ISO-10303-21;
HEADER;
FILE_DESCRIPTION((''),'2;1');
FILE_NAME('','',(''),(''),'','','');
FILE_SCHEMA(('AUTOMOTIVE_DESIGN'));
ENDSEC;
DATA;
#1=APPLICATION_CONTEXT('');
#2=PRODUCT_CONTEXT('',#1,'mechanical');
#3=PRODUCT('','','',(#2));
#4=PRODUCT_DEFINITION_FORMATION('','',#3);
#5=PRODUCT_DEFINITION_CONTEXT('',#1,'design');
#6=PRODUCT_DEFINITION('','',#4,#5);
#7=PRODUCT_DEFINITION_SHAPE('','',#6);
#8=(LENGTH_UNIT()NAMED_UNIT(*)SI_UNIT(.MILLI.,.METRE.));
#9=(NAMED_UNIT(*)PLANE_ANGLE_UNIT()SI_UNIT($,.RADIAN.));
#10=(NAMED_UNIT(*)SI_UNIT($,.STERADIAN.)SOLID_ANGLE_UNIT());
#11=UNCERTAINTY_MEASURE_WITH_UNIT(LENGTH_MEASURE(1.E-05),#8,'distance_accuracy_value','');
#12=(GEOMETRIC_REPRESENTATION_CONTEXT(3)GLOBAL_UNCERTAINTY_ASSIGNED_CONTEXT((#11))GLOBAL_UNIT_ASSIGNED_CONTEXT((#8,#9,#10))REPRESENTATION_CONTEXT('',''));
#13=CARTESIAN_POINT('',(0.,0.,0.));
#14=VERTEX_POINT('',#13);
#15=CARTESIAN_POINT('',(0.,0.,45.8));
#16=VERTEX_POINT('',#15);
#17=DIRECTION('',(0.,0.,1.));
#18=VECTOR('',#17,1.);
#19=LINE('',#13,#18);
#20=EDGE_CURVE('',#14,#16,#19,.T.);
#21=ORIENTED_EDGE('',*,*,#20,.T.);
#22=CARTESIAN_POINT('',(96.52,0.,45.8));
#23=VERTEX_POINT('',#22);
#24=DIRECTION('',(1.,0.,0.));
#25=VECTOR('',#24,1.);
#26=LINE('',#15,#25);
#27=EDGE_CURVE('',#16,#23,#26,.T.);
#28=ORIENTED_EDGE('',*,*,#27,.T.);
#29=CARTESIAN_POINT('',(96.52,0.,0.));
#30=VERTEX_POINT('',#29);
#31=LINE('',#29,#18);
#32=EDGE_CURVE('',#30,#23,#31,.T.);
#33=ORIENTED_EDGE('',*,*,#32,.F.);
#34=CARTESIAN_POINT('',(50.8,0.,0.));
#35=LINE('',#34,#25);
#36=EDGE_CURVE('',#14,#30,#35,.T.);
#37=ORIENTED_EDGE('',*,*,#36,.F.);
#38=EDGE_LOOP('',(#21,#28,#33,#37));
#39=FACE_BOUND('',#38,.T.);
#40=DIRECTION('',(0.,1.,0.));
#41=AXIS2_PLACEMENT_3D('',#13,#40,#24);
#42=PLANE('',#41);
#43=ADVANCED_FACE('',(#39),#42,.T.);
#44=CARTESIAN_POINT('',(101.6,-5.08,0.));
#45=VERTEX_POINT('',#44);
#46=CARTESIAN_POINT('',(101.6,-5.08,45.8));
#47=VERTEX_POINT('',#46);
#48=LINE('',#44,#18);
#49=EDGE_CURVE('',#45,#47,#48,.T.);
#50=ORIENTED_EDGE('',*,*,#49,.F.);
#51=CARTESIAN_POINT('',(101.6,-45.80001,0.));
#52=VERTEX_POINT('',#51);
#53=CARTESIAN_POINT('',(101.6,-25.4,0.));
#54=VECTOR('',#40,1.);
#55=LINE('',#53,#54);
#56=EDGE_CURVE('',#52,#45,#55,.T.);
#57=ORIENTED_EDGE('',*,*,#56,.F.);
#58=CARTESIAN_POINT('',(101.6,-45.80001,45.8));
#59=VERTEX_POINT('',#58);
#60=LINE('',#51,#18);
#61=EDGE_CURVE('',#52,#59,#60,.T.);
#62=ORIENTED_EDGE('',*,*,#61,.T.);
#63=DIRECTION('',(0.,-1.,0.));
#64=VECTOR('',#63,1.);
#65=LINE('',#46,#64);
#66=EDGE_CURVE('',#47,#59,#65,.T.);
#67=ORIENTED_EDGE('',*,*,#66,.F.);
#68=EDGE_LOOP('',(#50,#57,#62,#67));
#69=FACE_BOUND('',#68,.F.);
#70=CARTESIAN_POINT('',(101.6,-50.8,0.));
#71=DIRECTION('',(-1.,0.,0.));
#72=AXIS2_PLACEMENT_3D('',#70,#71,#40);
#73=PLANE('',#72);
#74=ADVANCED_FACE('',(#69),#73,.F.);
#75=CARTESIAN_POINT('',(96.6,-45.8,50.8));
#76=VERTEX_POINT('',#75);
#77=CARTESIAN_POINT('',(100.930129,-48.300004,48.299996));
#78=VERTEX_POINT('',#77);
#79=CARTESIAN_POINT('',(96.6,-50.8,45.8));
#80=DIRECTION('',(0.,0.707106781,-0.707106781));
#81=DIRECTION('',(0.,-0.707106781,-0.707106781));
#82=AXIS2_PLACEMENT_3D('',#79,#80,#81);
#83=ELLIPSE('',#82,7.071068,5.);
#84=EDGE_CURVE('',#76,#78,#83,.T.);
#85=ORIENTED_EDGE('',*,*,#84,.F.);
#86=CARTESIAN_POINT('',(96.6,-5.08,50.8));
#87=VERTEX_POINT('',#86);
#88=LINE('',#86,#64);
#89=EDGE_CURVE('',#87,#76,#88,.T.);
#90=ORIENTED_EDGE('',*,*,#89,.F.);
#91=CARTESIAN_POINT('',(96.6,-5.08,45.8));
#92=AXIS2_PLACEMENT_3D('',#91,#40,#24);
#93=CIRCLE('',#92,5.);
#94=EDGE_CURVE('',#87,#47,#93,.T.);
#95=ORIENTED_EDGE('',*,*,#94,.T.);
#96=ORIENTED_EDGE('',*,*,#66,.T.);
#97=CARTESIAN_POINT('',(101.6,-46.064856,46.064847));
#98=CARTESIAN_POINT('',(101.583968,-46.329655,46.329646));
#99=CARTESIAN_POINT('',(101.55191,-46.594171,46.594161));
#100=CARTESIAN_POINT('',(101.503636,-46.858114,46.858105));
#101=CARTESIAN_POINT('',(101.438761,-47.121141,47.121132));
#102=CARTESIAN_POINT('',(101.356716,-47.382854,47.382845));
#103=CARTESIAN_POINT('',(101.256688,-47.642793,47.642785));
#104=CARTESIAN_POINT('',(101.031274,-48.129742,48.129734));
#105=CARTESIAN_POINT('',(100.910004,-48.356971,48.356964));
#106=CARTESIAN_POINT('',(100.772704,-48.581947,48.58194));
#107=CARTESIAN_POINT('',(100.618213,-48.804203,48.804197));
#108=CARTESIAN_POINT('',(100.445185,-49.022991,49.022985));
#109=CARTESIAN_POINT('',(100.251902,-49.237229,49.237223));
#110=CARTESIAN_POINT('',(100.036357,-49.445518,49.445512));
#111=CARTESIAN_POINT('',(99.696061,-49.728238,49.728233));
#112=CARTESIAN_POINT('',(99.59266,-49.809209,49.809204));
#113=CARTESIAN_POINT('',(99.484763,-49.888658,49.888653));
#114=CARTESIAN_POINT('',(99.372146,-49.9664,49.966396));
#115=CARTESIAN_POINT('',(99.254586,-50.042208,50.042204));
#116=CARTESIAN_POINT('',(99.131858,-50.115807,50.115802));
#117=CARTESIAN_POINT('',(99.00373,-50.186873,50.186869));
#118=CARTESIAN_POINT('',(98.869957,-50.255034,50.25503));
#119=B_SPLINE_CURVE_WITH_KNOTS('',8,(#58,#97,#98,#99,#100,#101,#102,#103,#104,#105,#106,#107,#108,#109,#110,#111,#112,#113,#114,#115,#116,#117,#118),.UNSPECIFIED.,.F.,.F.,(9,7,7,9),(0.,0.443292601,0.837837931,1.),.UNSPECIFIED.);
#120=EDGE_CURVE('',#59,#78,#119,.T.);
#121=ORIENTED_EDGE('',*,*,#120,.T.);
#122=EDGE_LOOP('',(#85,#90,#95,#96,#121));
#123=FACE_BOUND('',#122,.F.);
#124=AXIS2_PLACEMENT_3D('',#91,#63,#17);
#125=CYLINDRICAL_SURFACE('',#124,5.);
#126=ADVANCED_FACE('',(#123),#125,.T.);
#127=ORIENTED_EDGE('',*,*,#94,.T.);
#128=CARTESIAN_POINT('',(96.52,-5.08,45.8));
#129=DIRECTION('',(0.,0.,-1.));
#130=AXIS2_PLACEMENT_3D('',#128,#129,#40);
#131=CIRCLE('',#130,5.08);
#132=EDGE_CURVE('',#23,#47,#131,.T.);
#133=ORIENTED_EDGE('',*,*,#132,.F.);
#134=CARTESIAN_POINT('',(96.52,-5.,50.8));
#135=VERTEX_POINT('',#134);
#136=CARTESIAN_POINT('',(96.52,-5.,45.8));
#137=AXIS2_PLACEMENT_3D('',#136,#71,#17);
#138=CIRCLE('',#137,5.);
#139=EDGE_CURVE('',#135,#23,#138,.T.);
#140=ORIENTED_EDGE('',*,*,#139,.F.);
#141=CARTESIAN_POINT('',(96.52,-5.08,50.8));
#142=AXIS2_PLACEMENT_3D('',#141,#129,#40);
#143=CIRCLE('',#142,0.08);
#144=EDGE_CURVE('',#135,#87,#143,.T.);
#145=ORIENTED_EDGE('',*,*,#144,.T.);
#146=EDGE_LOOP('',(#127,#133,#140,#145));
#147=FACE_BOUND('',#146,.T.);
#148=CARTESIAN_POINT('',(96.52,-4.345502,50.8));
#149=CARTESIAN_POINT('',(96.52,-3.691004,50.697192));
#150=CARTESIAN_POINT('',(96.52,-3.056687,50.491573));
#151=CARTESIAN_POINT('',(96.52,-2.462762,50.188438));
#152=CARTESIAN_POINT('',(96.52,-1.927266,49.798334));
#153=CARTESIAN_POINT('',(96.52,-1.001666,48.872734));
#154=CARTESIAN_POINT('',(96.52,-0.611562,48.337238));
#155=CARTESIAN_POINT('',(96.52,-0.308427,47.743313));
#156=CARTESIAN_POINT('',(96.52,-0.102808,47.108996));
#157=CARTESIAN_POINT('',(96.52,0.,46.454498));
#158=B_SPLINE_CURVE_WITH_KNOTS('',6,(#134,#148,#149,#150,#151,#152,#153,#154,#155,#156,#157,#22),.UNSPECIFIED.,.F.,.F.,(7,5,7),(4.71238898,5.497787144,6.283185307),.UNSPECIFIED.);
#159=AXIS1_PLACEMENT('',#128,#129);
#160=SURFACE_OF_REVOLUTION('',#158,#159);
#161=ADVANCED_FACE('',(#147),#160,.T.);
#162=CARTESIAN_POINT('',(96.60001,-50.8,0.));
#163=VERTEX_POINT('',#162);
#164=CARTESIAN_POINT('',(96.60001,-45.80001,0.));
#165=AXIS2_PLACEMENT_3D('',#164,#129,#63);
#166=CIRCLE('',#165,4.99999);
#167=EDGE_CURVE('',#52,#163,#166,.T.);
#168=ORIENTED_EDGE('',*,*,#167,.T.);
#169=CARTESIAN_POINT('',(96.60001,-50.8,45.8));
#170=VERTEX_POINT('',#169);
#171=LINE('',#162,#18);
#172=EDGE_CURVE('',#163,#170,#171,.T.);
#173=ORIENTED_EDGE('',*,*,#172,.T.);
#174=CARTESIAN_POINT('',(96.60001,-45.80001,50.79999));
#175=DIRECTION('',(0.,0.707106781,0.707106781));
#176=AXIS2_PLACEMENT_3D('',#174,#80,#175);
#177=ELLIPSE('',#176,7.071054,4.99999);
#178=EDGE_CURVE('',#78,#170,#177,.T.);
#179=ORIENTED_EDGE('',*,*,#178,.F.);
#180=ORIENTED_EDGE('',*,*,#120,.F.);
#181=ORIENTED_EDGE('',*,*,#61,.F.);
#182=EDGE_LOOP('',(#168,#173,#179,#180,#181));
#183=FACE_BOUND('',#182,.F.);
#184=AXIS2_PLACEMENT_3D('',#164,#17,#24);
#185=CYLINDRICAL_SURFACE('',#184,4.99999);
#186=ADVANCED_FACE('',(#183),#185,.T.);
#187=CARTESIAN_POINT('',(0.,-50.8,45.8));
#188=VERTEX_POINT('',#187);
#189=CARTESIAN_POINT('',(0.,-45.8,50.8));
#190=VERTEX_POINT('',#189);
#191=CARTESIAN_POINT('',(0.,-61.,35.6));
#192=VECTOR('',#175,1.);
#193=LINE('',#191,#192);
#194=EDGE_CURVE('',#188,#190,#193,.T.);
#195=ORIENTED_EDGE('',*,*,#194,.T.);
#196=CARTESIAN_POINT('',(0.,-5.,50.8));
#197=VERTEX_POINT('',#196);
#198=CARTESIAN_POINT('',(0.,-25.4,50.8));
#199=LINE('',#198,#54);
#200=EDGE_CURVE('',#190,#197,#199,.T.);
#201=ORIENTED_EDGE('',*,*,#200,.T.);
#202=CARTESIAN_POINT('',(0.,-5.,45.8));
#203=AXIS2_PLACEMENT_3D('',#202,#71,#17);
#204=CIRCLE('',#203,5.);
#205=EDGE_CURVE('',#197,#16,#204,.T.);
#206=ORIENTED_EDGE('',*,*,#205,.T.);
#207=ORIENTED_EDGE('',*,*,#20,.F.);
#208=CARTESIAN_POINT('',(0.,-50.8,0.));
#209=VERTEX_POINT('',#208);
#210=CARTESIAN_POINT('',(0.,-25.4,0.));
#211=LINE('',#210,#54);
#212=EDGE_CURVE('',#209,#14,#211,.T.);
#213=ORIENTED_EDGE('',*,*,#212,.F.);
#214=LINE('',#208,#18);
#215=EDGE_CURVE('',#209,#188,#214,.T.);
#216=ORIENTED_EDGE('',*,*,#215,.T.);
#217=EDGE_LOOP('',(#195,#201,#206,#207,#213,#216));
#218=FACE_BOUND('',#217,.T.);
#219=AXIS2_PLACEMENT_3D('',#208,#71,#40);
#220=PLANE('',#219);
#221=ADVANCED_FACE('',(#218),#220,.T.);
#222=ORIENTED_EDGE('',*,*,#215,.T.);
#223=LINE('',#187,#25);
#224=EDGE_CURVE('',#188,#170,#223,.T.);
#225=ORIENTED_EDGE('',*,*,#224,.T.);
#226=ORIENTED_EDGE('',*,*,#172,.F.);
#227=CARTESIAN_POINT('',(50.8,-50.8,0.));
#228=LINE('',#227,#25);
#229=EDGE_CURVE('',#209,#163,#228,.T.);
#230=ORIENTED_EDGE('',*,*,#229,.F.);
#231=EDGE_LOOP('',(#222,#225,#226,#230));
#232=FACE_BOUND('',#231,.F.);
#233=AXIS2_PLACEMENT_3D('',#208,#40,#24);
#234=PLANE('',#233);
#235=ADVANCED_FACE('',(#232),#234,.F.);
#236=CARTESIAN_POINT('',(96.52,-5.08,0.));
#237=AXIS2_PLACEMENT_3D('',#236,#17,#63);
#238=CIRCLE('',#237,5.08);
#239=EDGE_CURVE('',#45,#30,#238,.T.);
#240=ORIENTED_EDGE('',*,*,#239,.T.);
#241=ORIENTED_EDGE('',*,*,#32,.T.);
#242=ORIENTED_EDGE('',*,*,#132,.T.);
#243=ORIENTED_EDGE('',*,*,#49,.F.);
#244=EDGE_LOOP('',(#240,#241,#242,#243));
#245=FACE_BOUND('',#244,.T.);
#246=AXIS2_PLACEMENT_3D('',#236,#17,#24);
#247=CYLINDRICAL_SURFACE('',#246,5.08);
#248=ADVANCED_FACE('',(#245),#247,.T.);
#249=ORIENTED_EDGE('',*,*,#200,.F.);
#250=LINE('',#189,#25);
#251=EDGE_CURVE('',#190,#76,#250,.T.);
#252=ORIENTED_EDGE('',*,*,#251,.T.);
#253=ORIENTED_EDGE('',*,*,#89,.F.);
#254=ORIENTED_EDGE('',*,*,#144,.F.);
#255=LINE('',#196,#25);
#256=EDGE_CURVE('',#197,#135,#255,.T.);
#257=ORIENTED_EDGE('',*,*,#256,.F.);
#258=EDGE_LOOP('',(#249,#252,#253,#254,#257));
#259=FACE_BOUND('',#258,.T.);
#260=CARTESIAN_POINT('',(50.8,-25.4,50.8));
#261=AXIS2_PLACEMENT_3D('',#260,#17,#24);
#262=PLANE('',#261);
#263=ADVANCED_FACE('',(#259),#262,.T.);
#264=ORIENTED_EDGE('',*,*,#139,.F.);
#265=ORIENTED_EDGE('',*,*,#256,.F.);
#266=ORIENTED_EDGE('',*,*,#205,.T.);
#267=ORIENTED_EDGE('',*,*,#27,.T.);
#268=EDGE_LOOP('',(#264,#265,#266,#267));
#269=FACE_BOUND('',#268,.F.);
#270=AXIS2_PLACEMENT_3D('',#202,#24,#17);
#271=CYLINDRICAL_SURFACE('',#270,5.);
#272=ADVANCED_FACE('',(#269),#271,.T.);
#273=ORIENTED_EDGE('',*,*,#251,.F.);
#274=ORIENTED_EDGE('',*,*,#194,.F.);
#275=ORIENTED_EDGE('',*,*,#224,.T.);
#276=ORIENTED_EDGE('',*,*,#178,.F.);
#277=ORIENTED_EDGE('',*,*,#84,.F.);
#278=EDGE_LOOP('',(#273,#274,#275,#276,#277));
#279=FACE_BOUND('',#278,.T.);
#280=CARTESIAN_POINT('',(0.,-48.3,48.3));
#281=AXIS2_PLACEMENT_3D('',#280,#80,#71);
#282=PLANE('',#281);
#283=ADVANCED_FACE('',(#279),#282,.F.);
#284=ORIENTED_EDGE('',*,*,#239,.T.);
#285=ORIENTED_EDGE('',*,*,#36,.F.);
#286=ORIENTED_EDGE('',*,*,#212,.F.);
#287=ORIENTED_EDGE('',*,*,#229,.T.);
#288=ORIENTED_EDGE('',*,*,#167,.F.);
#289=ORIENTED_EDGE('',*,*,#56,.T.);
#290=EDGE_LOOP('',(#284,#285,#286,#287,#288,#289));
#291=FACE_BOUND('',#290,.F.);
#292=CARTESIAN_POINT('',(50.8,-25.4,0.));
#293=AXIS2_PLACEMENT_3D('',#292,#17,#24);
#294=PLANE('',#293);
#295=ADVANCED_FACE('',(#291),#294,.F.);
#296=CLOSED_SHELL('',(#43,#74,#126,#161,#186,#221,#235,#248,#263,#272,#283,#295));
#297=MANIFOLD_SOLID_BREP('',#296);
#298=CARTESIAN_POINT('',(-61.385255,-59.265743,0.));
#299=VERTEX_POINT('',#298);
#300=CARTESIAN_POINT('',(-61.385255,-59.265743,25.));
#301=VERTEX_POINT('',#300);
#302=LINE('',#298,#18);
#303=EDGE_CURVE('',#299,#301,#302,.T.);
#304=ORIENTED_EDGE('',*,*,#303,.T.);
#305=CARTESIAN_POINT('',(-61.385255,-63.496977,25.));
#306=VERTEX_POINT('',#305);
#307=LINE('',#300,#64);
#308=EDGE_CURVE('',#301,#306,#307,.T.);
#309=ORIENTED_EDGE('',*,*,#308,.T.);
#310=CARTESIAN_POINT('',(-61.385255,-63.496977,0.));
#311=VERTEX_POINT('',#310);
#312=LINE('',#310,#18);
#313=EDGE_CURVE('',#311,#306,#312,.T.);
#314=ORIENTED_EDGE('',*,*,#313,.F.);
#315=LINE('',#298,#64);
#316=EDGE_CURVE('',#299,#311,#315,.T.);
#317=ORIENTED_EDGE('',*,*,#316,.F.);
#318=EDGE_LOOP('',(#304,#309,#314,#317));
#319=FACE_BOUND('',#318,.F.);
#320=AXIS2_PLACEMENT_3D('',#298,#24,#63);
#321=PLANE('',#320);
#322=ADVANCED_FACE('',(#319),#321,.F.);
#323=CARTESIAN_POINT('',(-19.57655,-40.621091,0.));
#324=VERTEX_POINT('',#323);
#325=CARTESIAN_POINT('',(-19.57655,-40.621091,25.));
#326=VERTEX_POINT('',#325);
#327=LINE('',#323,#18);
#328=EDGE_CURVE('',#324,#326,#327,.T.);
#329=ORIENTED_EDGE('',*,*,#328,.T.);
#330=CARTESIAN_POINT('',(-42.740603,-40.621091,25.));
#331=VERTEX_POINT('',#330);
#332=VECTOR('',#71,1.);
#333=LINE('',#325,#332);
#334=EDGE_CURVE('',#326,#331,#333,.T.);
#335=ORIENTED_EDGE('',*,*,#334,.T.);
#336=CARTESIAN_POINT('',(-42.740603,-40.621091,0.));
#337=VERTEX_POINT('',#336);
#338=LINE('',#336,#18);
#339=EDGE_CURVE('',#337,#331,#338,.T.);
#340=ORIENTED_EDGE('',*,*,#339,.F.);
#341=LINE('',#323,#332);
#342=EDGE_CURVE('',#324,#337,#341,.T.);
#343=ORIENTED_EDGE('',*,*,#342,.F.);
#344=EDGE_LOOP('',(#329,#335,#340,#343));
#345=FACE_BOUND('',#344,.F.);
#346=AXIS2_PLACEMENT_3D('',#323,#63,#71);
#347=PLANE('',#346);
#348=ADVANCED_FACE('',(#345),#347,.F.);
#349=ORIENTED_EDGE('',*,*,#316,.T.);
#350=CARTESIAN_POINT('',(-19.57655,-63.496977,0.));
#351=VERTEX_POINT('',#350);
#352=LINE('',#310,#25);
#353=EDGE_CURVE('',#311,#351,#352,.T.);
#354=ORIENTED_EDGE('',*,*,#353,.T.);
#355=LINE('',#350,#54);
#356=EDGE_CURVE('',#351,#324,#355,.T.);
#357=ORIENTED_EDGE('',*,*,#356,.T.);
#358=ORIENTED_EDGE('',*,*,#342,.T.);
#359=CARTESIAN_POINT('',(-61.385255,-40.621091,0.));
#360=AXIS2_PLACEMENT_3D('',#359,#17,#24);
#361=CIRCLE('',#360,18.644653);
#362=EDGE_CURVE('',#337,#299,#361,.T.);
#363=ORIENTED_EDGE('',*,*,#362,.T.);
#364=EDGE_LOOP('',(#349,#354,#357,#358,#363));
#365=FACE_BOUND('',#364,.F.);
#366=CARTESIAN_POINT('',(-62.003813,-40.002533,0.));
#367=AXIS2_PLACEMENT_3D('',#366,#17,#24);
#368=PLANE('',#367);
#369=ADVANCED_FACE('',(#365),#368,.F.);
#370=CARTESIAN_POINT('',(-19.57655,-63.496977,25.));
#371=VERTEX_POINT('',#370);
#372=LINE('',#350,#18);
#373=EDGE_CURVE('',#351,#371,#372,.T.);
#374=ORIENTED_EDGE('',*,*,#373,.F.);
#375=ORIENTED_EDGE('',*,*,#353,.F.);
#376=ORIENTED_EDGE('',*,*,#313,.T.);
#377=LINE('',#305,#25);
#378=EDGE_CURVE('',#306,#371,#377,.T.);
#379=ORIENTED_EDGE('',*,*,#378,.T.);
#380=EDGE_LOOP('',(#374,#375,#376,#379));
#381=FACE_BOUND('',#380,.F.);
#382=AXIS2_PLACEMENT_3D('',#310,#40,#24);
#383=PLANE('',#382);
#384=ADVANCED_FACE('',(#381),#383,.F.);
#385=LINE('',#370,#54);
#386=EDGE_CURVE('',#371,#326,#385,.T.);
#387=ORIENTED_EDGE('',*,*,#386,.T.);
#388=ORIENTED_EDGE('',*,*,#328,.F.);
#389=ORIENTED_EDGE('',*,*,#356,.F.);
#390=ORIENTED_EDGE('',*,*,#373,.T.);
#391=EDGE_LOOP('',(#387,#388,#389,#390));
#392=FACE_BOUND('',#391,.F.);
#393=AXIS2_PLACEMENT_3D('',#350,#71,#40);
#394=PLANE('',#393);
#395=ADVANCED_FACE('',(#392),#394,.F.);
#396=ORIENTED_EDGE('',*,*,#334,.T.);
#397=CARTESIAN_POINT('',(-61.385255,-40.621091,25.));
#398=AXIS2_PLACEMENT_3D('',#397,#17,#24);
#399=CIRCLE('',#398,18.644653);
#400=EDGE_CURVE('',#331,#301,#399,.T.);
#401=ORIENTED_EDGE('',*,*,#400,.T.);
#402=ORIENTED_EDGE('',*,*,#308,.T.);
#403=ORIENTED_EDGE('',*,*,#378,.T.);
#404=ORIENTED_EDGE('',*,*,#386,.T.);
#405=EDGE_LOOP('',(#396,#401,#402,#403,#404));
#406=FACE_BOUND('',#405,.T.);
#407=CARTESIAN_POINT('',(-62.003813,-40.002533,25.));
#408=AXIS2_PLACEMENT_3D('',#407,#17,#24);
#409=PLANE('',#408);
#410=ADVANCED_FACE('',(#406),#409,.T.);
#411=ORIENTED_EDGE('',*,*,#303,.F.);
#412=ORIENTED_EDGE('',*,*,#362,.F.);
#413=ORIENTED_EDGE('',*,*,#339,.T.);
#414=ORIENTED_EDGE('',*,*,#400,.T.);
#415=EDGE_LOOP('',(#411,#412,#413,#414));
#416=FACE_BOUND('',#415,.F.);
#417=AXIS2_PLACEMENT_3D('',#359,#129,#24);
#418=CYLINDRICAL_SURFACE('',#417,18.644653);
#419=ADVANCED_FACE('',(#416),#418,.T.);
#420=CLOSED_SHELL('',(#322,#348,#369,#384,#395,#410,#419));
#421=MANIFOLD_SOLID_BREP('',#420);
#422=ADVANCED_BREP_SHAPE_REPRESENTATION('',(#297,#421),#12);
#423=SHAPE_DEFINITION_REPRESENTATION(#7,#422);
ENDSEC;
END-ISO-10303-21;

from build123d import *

# Parameters (mm, degrees)
F0_W     = 101.6
F0_H     = 50.8
F1_DEPTH = 50.8
F2_R     = 5.08
F4_DEPTH = 25
F5_SIZE  = 5
F6_R     = 5
F7_R     = 4.99999


# Not quite as in the source:
# - a fillet or chamfer is up to 0.001 mm smaller than in the source, because OpenCascade refuses the exact size


with BuildPart() as f1:
    # F0 (on Top) → F1 (new body)
    with BuildSketch(Plane.XY):
        with Locations((50.8, -25.4)):
            Rectangle(F0_W, F0_H)
    extrude(amount=F1_DEPTH)

    # F2
    f2_edges = [f1.edges().sort_by_distance(p)[0] for p in [
        (101.6, 0, 25.4),
    ]]
    fillet(f2_edges, radius=F2_R)

    # F5
    f5_edges = [f1.edges().sort_by_distance(p)[0] for p in [
        (50.8, -50.8, 50.8),
    ]]
    chamfer(f5_edges, length=F5_SIZE)

    # F6
    f6_edges = [f1.edges().sort_by_distance(p)[0] for p in [
        (48.26, 0, 50.8),
    ]]
    fillet(f6_edges, radius=F6_R)

    # F7 (radius 5 in the source; OpenCascade refuses exactly that, so slightly less here)
    f7_edges = [f1.edges().sort_by_distance(p)[0] for p in [
        (101.6, -50.8, 22.9),
    ]]
    fillet(f7_edges, radius=F7_R)


with BuildPart() as f4:
    # F3 (on Top) → F4 (new body)
    with BuildSketch(Plane.XY):
        with BuildLine():
            Line((-61.385255307, -59.2657432558), (-61.385255307, -40.6210906804))
            Line((-61.385255307, -40.6210906804), (-42.7406027316, -40.6210906804))
            ThreePointArc((-42.7406027316, -40.6210906804), (-74.5690155759, -27.4373304114), (-61.385255307, -59.2657432558))
        make_face()
        with BuildLine():
            Line((-42.7406027316, -40.6210906804), (-61.385255307, -40.6210906804))
            Line((-61.385255307, -40.6210906804), (-61.385255307, -59.2657432558))
            ThreePointArc((-61.385255307, -59.2657432558), (-48.201495038, -53.8048509493), (-42.7406027316, -40.6210906804))
        make_face()
        with BuildLine():
            Line((-19.57654953, -40.6210906804), (-42.7406027316, -40.6210906804))
            ThreePointArc((-42.7406027316, -40.6210906804), (-48.201495038, -53.8048509493), (-61.385255307, -59.2657432558))
            Line((-61.385255307, -59.2657432558), (-61.385255307, -63.4969770908))
            Line((-61.385255307, -63.4969770908), (-19.57654953, -63.4969770908))
            Line((-19.57654953, -63.4969770908), (-19.57654953, -40.6210906804))
        make_face()
    extrude(amount=F4_DEPTH)


solid = Compound([f1.part, f4.part])
